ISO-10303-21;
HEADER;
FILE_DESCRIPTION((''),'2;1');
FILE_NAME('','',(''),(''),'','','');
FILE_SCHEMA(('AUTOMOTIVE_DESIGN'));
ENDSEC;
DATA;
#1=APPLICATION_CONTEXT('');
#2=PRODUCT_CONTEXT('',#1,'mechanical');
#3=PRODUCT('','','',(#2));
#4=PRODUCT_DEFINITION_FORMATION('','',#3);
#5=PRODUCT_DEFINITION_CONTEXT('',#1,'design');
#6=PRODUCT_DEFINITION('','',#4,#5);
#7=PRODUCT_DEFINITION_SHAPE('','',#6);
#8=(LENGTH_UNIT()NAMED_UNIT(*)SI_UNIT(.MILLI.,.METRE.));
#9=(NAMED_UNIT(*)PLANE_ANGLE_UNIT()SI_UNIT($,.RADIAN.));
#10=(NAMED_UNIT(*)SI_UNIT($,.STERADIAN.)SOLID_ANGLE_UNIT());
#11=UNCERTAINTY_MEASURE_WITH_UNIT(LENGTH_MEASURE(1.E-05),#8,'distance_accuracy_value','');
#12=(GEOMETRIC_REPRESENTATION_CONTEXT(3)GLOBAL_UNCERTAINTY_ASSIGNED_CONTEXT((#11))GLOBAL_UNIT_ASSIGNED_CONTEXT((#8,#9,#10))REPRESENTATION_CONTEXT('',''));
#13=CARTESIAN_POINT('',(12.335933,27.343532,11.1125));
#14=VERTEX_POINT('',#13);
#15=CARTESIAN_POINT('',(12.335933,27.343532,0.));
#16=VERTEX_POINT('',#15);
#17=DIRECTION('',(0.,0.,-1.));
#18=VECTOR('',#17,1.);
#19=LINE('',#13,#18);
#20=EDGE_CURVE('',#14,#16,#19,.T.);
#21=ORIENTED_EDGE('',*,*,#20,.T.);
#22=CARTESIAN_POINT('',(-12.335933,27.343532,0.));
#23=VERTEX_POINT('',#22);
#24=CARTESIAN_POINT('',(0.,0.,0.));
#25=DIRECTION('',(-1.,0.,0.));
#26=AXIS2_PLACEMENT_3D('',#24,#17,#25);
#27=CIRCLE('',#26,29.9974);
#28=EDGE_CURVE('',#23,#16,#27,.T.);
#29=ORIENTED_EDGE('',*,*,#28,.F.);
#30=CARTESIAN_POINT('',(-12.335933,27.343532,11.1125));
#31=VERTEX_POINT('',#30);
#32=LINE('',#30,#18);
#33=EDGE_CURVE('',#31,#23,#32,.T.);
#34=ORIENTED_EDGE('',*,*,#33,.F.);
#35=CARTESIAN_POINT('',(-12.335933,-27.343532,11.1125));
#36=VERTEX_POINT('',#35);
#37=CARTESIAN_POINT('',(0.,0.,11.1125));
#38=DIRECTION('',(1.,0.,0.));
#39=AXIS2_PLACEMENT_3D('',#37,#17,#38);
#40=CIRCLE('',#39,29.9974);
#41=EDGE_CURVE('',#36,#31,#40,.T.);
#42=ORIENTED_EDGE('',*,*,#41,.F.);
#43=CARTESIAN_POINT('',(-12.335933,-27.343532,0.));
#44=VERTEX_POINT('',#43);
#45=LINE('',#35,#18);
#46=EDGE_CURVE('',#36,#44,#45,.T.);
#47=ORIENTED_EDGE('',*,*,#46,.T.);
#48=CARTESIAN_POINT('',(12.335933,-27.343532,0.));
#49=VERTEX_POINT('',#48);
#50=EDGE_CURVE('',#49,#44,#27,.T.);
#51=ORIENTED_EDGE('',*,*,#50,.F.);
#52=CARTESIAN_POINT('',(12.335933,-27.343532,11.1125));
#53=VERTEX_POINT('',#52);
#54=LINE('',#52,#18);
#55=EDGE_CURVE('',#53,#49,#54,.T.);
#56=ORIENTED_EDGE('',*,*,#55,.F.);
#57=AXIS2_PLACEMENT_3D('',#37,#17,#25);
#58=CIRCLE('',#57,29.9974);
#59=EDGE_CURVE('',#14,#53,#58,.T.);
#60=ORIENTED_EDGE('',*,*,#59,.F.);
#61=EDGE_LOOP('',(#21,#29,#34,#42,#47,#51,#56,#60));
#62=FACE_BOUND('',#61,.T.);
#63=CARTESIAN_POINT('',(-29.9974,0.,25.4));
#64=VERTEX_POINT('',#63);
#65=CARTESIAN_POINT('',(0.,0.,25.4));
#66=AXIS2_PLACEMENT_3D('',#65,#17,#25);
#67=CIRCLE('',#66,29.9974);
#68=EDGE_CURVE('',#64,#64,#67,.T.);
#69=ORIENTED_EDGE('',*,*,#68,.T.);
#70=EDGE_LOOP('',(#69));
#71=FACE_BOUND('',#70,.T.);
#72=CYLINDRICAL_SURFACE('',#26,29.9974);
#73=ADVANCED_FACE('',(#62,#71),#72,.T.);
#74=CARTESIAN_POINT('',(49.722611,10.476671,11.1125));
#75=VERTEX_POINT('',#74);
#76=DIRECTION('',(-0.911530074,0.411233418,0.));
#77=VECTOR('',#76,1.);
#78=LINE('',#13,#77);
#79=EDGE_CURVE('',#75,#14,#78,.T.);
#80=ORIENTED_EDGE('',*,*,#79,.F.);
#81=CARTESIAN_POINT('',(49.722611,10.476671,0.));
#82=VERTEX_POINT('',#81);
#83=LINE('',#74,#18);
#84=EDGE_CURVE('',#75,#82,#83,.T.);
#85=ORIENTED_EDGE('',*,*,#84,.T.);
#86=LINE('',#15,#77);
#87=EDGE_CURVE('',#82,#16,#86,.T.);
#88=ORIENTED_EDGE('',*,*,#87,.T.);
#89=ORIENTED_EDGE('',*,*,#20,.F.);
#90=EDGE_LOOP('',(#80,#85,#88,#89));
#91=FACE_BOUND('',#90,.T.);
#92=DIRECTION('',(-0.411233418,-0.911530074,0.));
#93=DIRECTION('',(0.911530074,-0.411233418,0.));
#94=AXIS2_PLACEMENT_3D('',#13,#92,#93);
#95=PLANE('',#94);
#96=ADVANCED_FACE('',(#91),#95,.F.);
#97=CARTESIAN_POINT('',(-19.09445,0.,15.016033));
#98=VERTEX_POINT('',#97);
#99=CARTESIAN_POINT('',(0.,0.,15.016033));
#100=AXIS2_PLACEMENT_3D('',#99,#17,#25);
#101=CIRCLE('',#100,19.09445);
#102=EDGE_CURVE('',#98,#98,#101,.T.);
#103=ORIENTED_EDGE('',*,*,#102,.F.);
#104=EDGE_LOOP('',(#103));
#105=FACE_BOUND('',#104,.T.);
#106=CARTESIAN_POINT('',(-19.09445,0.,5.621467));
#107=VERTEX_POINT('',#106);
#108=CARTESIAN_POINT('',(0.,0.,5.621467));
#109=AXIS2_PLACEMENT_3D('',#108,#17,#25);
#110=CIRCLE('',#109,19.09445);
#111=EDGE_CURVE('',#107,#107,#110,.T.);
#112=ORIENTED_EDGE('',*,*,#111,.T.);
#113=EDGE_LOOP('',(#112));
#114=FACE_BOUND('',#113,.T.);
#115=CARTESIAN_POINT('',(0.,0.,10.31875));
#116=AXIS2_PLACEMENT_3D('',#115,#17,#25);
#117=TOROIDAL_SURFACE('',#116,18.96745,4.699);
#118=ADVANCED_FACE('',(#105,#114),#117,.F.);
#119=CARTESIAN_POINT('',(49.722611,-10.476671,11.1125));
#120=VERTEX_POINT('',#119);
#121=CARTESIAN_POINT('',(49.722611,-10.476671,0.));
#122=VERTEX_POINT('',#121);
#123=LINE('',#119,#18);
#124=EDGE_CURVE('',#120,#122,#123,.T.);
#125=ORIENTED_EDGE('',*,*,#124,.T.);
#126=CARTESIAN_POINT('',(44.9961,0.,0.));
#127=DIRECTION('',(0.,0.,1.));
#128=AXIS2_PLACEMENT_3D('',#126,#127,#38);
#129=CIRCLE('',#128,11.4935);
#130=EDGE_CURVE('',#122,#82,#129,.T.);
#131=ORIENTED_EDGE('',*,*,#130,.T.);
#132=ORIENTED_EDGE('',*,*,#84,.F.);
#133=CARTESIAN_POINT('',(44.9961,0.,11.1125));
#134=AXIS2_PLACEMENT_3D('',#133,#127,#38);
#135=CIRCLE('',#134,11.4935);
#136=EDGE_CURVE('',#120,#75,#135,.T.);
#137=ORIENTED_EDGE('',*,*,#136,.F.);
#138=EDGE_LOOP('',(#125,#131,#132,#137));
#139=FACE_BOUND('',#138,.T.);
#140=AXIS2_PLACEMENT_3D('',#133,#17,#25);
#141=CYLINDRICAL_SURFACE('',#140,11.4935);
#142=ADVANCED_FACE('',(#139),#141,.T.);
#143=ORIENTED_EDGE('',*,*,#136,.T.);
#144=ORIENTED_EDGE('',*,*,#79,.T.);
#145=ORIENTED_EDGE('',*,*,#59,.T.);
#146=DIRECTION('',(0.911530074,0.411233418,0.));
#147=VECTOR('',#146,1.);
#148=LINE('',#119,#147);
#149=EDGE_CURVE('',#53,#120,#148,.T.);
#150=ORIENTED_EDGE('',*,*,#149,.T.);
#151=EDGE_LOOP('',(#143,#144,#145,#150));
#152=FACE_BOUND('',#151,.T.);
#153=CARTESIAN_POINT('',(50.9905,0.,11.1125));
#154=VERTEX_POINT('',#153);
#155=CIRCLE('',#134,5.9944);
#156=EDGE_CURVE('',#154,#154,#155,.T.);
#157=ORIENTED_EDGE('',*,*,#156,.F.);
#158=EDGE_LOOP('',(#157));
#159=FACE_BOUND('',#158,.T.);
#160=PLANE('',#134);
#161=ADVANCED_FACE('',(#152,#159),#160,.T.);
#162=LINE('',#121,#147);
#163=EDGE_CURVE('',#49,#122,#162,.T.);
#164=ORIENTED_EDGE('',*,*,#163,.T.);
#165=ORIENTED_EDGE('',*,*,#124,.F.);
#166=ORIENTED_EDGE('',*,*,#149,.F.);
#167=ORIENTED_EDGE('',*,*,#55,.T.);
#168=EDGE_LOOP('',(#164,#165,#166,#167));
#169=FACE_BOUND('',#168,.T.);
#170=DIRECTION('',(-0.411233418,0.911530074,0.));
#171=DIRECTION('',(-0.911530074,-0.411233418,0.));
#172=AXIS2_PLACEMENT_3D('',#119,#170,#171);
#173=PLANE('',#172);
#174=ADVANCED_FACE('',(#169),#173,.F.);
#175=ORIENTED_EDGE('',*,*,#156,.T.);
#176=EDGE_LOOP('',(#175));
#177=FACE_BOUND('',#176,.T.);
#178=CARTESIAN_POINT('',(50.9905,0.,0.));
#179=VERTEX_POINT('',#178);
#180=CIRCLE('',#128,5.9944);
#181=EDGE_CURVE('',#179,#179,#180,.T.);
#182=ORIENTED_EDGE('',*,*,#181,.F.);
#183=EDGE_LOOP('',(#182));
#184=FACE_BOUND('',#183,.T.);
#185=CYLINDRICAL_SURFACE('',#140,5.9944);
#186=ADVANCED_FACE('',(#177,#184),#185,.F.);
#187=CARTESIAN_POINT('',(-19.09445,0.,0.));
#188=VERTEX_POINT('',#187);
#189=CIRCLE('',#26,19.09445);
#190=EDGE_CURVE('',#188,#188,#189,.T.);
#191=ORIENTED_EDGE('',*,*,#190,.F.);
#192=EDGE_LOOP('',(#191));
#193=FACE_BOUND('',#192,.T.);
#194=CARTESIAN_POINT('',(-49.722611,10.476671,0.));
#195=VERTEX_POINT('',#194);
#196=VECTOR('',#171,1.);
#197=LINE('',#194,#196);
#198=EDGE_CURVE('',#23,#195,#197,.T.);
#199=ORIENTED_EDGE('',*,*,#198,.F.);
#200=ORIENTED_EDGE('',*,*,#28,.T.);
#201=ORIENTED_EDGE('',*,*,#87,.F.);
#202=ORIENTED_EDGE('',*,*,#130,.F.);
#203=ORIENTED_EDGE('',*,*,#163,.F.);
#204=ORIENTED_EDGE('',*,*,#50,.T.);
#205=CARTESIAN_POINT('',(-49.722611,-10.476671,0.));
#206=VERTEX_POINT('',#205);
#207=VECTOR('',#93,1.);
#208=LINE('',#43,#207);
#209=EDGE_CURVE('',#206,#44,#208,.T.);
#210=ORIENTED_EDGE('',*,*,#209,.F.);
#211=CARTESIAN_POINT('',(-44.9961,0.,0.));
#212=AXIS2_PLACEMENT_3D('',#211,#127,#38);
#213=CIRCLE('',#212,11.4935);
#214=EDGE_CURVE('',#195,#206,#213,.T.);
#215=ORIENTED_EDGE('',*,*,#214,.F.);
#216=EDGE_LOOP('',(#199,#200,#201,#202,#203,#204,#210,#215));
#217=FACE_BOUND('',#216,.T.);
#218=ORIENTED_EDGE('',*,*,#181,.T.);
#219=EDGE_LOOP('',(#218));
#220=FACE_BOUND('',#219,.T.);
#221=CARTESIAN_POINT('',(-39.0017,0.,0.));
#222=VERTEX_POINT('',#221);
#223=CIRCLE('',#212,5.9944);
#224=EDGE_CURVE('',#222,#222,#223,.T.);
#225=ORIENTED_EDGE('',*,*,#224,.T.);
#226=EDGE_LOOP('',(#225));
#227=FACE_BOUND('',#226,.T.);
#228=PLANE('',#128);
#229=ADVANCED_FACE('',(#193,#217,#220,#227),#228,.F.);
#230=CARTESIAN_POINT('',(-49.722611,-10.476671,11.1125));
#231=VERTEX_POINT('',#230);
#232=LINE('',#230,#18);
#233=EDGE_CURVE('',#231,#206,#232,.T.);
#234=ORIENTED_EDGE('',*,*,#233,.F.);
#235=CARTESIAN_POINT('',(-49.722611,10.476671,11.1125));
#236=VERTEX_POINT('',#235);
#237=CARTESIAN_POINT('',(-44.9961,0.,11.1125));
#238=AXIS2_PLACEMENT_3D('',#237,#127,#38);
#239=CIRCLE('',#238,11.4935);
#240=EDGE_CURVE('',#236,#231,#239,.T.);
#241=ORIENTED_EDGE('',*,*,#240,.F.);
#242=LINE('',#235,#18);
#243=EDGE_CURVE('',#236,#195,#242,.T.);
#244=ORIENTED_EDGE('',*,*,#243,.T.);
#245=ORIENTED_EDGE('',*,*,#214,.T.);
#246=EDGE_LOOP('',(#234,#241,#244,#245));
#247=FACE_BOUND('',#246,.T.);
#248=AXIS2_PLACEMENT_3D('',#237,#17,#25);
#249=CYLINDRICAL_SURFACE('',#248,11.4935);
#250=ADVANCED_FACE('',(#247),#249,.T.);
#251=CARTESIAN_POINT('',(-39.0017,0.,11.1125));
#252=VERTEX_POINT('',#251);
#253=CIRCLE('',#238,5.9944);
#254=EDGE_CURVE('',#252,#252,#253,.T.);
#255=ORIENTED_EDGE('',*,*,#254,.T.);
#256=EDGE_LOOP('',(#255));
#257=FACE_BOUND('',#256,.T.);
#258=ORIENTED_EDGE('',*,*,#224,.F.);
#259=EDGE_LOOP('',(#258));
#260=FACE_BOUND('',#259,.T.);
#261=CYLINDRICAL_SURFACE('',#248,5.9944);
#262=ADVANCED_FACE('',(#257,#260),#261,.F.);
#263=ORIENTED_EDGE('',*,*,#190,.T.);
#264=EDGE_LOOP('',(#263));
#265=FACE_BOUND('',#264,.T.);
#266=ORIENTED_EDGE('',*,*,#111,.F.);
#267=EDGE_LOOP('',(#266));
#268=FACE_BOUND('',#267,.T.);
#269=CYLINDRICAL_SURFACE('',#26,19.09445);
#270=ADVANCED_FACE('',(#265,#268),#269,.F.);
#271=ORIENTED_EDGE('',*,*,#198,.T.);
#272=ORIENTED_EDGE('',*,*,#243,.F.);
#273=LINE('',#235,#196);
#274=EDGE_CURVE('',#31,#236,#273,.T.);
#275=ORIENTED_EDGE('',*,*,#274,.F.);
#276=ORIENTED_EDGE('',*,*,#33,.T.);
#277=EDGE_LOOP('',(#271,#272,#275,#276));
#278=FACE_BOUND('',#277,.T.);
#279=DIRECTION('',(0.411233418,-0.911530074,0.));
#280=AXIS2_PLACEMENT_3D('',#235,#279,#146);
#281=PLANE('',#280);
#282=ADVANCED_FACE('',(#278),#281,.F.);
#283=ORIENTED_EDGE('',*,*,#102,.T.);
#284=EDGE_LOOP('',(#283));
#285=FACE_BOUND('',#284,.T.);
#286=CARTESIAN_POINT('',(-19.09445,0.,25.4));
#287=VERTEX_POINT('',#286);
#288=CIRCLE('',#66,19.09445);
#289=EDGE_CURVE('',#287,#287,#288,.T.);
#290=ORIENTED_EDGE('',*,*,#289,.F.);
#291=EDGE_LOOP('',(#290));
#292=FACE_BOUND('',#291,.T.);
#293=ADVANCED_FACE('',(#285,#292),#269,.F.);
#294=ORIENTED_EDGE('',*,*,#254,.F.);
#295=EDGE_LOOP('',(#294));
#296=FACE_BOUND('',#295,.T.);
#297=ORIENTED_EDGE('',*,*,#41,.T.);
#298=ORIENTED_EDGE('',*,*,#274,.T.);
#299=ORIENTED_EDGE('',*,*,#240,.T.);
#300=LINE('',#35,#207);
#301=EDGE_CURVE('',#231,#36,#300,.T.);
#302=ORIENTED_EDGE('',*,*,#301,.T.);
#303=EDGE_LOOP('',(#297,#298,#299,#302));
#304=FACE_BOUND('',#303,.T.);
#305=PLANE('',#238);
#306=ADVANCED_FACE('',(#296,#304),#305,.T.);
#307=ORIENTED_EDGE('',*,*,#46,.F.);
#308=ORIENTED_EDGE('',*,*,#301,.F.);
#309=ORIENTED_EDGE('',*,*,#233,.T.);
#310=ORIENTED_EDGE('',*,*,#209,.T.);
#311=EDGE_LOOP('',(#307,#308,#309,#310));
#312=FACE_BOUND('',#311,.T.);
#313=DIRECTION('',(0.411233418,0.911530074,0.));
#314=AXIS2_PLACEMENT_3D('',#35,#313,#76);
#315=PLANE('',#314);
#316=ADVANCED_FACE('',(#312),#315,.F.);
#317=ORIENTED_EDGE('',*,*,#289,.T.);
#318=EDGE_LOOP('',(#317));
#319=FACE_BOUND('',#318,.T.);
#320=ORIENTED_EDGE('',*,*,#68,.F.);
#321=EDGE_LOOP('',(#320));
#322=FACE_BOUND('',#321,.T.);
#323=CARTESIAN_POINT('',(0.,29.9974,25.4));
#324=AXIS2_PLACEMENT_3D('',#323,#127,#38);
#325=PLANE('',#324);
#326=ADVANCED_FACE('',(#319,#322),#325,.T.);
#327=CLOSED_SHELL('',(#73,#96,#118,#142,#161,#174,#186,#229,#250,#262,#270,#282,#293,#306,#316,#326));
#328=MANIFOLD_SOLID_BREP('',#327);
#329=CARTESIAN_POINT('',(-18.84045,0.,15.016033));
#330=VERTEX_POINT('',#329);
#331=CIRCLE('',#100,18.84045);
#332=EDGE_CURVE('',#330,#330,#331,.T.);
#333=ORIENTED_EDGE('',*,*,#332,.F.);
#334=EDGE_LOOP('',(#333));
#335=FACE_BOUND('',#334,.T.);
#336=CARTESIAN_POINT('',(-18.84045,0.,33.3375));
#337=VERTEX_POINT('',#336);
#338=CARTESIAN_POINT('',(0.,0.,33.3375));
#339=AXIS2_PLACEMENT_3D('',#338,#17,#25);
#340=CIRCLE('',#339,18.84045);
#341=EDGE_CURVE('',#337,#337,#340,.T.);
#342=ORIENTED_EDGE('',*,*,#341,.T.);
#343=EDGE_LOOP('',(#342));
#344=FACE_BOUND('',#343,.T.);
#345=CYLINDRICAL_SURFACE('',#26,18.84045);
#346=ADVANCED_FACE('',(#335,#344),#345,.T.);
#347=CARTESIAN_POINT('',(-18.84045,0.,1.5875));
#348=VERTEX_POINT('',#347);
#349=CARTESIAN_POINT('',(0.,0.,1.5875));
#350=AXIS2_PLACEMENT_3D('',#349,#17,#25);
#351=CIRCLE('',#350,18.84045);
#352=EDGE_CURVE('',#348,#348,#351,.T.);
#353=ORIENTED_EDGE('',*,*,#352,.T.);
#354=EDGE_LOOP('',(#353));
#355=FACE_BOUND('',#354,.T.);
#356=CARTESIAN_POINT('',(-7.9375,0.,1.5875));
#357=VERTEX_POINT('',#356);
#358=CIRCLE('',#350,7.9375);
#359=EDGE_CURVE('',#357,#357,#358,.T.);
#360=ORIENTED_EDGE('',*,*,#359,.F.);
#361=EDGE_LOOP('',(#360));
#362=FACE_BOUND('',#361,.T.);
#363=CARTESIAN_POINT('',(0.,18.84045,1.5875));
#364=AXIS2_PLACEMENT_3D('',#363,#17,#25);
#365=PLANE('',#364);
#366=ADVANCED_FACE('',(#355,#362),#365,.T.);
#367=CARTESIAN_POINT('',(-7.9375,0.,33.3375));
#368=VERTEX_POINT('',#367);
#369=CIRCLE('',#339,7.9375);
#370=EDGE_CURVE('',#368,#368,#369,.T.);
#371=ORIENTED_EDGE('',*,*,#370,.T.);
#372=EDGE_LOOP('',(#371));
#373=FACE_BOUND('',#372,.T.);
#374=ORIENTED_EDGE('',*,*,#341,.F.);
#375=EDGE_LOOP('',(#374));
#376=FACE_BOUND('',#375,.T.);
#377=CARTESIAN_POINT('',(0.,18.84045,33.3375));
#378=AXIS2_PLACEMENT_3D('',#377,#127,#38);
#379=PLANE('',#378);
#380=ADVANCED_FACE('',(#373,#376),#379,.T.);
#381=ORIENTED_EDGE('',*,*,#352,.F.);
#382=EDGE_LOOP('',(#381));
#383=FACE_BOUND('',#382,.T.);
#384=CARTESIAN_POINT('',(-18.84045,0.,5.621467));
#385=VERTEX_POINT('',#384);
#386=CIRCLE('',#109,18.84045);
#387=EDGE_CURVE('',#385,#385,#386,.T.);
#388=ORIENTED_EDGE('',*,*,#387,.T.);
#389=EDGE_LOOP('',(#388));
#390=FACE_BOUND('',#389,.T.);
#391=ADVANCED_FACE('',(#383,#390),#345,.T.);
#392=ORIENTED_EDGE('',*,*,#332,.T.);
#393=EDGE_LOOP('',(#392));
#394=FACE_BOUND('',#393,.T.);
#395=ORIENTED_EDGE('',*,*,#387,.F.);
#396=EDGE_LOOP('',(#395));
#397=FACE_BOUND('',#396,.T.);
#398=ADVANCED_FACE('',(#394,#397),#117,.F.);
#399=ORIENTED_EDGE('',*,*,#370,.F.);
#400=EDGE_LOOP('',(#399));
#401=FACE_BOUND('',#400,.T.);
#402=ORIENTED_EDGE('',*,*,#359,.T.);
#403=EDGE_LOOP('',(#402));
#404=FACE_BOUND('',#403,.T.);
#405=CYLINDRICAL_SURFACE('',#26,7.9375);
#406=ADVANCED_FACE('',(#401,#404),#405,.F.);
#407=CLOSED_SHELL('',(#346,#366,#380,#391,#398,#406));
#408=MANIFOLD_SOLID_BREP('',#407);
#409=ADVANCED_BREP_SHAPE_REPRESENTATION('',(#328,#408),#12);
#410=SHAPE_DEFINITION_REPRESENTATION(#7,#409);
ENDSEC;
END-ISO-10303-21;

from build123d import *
from build123d.topology import SkipClean

# Parameters (mm, degrees)
SKETCH1_R        = 5.9944
EXTRUDE1_DEPTH   = 11.1125
EXTRUDE1_2_DEPTH = 11.1125
EXTRUDE2_DEPTH   = 11.1125


with BuildPart() as part:
    # Sketch1 → Extrude1 (new body)
    with BuildSketch(Plane.XY):
        with BuildLine():
            Line((-44.9961, 11.4935), (-27.708184071, 11.4935))
            ThreePointArc((-27.708184071, 11.4935), (-29.9974, 0), (-27.708184071, -11.4935))
            Line((-27.708184071, -11.4935), (-44.9961, -11.4935))
            ThreePointArc((-44.9961, -11.4935), (-56.4896, 0), (-44.9961, 11.4935))
        make_face()
        with Locations((-44.9961, 0)):
            Circle(SKETCH1_R, mode=Mode.SUBTRACT)
    extrude(amount=EXTRUDE1_DEPTH)



with BuildPart() as body_2:
    # Sketch1 → Extrude1 2 (new body)
    with BuildSketch(Plane.XY):
        with BuildLine():
            Line((44.9961, 11.4935), (27.708184071, 11.4935))
            ThreePointArc((27.708184071, 11.4935), (29.9974, 0), (27.708184071, -11.4935))
            Line((27.708184071, -11.4935), (44.9961, -11.4935))
            ThreePointArc((44.9961, -11.4935), (56.4896, 0), (44.9961, 11.4935))
        make_face()
        with Locations((44.9961, 0)):
            Circle(SKETCH1_R, mode=Mode.SUBTRACT)
    extrude(amount=EXTRUDE1_2_DEPTH)


with BuildPart() as part_1:
    with SkipClean():  # the faces are left unmerged after this step: merging them gives an invalid solid
        add(part.part)

        add(body_2.part)  # Extrude2 merges body 2
        # Sketch2 → Extrude2 (add)
        with BuildSketch(Plane.XY):
            with BuildLine():
                Line((-49.72261129, 10.476670906), (-12.335933333, 27.343532244))
                ThreePointArc((-12.335933333, 27.343532244), (-21.533432499, 20.884331245), (-27.708184071, 11.4935))
                Line((-27.708184071, 11.4935), (-44.9961, 11.4935))
                ThreePointArc((-44.9961, 11.4935), (-47.413425505, 11.236417563), (-49.72261129, 10.476670906))
            make_face()
            with BuildLine():
                Line((-44.9961, -11.4935), (-27.708184071, -11.4935))
                ThreePointArc((-27.708184071, -11.4935), (-21.533432499, -20.884331245), (-12.335933333, -27.343532244))
                Line((-12.335933333, -27.343532244), (-49.72261129, -10.476670906))
                ThreePointArc((-49.72261129, -10.476670906), (-47.413425505, -11.236417563), (-44.9961, -11.4935))
            make_face()
            with BuildLine():
                Line((12.335933333, 27.343532244), (49.72261129, 10.476670906))
                ThreePointArc((49.72261129, 10.476670906), (47.413425505, 11.236417563), (44.9961, 11.4935))
                Line((44.9961, 11.4935), (27.708184071, 11.4935))
                ThreePointArc((27.708184071, 11.4935), (21.533432499, 20.884331245), (12.335933333, 27.343532244))
            make_face()
            with BuildLine():
                Line((49.72261129, -10.476670906), (12.335933333, -27.343532244))
                ThreePointArc((12.335933333, -27.343532244), (21.533432499, -20.884331245), (27.708184071, -11.4935))
                Line((27.708184071, -11.4935), (44.9961, -11.4935))
                ThreePointArc((44.9961, -11.4935), (47.413425505, -11.236417563), (49.72261129, -10.476670906))
            make_face()
        extrude(amount=EXTRUDE2_DEPTH)

    # Sketch3 → Revolve1 (revolve)
    with BuildSketch(Plane(origin=(0, 0, 0), x_dir=(0, 0, -1), z_dir=(1, 0, 0))):
        with BuildLine():
            Line((0, 29.9974), (-25.4, 29.9974))
            Line((-25.4, 29.9974), (-25.4, 19.09445))
            Line((-25.4, 19.09445), (-15.01603347, 19.09445))
            ThreePointArc((-15.01603347, 19.09445), (-10.31875, 23.66645), (-5.62146653, 19.09445))
            Line((-5.62146653, 19.09445), (0, 19.09445))
            Line((0, 19.09445), (0, 29.9974))
        make_face()
        with BuildLine():
            Line((-33.3375, 18.84045), (-15.01603347, 18.84045))
            ThreePointArc((-15.01603347, 18.84045), (-10.31875, 14.26845), (-5.62146653, 18.84045))
            Line((-5.62146653, 18.84045), (-1.5875, 18.84045))
            Line((-1.5875, 18.84045), (-1.5875, 7.9375))
            Line((-1.5875, 7.9375), (-33.3375, 7.9375))
            Line((-33.3375, 7.9375), (-33.3375, 18.84045))
        make_face()
    revolve(axis=Axis((0, 0, 0), (0, 0, 1)))


solid = part_1.part
